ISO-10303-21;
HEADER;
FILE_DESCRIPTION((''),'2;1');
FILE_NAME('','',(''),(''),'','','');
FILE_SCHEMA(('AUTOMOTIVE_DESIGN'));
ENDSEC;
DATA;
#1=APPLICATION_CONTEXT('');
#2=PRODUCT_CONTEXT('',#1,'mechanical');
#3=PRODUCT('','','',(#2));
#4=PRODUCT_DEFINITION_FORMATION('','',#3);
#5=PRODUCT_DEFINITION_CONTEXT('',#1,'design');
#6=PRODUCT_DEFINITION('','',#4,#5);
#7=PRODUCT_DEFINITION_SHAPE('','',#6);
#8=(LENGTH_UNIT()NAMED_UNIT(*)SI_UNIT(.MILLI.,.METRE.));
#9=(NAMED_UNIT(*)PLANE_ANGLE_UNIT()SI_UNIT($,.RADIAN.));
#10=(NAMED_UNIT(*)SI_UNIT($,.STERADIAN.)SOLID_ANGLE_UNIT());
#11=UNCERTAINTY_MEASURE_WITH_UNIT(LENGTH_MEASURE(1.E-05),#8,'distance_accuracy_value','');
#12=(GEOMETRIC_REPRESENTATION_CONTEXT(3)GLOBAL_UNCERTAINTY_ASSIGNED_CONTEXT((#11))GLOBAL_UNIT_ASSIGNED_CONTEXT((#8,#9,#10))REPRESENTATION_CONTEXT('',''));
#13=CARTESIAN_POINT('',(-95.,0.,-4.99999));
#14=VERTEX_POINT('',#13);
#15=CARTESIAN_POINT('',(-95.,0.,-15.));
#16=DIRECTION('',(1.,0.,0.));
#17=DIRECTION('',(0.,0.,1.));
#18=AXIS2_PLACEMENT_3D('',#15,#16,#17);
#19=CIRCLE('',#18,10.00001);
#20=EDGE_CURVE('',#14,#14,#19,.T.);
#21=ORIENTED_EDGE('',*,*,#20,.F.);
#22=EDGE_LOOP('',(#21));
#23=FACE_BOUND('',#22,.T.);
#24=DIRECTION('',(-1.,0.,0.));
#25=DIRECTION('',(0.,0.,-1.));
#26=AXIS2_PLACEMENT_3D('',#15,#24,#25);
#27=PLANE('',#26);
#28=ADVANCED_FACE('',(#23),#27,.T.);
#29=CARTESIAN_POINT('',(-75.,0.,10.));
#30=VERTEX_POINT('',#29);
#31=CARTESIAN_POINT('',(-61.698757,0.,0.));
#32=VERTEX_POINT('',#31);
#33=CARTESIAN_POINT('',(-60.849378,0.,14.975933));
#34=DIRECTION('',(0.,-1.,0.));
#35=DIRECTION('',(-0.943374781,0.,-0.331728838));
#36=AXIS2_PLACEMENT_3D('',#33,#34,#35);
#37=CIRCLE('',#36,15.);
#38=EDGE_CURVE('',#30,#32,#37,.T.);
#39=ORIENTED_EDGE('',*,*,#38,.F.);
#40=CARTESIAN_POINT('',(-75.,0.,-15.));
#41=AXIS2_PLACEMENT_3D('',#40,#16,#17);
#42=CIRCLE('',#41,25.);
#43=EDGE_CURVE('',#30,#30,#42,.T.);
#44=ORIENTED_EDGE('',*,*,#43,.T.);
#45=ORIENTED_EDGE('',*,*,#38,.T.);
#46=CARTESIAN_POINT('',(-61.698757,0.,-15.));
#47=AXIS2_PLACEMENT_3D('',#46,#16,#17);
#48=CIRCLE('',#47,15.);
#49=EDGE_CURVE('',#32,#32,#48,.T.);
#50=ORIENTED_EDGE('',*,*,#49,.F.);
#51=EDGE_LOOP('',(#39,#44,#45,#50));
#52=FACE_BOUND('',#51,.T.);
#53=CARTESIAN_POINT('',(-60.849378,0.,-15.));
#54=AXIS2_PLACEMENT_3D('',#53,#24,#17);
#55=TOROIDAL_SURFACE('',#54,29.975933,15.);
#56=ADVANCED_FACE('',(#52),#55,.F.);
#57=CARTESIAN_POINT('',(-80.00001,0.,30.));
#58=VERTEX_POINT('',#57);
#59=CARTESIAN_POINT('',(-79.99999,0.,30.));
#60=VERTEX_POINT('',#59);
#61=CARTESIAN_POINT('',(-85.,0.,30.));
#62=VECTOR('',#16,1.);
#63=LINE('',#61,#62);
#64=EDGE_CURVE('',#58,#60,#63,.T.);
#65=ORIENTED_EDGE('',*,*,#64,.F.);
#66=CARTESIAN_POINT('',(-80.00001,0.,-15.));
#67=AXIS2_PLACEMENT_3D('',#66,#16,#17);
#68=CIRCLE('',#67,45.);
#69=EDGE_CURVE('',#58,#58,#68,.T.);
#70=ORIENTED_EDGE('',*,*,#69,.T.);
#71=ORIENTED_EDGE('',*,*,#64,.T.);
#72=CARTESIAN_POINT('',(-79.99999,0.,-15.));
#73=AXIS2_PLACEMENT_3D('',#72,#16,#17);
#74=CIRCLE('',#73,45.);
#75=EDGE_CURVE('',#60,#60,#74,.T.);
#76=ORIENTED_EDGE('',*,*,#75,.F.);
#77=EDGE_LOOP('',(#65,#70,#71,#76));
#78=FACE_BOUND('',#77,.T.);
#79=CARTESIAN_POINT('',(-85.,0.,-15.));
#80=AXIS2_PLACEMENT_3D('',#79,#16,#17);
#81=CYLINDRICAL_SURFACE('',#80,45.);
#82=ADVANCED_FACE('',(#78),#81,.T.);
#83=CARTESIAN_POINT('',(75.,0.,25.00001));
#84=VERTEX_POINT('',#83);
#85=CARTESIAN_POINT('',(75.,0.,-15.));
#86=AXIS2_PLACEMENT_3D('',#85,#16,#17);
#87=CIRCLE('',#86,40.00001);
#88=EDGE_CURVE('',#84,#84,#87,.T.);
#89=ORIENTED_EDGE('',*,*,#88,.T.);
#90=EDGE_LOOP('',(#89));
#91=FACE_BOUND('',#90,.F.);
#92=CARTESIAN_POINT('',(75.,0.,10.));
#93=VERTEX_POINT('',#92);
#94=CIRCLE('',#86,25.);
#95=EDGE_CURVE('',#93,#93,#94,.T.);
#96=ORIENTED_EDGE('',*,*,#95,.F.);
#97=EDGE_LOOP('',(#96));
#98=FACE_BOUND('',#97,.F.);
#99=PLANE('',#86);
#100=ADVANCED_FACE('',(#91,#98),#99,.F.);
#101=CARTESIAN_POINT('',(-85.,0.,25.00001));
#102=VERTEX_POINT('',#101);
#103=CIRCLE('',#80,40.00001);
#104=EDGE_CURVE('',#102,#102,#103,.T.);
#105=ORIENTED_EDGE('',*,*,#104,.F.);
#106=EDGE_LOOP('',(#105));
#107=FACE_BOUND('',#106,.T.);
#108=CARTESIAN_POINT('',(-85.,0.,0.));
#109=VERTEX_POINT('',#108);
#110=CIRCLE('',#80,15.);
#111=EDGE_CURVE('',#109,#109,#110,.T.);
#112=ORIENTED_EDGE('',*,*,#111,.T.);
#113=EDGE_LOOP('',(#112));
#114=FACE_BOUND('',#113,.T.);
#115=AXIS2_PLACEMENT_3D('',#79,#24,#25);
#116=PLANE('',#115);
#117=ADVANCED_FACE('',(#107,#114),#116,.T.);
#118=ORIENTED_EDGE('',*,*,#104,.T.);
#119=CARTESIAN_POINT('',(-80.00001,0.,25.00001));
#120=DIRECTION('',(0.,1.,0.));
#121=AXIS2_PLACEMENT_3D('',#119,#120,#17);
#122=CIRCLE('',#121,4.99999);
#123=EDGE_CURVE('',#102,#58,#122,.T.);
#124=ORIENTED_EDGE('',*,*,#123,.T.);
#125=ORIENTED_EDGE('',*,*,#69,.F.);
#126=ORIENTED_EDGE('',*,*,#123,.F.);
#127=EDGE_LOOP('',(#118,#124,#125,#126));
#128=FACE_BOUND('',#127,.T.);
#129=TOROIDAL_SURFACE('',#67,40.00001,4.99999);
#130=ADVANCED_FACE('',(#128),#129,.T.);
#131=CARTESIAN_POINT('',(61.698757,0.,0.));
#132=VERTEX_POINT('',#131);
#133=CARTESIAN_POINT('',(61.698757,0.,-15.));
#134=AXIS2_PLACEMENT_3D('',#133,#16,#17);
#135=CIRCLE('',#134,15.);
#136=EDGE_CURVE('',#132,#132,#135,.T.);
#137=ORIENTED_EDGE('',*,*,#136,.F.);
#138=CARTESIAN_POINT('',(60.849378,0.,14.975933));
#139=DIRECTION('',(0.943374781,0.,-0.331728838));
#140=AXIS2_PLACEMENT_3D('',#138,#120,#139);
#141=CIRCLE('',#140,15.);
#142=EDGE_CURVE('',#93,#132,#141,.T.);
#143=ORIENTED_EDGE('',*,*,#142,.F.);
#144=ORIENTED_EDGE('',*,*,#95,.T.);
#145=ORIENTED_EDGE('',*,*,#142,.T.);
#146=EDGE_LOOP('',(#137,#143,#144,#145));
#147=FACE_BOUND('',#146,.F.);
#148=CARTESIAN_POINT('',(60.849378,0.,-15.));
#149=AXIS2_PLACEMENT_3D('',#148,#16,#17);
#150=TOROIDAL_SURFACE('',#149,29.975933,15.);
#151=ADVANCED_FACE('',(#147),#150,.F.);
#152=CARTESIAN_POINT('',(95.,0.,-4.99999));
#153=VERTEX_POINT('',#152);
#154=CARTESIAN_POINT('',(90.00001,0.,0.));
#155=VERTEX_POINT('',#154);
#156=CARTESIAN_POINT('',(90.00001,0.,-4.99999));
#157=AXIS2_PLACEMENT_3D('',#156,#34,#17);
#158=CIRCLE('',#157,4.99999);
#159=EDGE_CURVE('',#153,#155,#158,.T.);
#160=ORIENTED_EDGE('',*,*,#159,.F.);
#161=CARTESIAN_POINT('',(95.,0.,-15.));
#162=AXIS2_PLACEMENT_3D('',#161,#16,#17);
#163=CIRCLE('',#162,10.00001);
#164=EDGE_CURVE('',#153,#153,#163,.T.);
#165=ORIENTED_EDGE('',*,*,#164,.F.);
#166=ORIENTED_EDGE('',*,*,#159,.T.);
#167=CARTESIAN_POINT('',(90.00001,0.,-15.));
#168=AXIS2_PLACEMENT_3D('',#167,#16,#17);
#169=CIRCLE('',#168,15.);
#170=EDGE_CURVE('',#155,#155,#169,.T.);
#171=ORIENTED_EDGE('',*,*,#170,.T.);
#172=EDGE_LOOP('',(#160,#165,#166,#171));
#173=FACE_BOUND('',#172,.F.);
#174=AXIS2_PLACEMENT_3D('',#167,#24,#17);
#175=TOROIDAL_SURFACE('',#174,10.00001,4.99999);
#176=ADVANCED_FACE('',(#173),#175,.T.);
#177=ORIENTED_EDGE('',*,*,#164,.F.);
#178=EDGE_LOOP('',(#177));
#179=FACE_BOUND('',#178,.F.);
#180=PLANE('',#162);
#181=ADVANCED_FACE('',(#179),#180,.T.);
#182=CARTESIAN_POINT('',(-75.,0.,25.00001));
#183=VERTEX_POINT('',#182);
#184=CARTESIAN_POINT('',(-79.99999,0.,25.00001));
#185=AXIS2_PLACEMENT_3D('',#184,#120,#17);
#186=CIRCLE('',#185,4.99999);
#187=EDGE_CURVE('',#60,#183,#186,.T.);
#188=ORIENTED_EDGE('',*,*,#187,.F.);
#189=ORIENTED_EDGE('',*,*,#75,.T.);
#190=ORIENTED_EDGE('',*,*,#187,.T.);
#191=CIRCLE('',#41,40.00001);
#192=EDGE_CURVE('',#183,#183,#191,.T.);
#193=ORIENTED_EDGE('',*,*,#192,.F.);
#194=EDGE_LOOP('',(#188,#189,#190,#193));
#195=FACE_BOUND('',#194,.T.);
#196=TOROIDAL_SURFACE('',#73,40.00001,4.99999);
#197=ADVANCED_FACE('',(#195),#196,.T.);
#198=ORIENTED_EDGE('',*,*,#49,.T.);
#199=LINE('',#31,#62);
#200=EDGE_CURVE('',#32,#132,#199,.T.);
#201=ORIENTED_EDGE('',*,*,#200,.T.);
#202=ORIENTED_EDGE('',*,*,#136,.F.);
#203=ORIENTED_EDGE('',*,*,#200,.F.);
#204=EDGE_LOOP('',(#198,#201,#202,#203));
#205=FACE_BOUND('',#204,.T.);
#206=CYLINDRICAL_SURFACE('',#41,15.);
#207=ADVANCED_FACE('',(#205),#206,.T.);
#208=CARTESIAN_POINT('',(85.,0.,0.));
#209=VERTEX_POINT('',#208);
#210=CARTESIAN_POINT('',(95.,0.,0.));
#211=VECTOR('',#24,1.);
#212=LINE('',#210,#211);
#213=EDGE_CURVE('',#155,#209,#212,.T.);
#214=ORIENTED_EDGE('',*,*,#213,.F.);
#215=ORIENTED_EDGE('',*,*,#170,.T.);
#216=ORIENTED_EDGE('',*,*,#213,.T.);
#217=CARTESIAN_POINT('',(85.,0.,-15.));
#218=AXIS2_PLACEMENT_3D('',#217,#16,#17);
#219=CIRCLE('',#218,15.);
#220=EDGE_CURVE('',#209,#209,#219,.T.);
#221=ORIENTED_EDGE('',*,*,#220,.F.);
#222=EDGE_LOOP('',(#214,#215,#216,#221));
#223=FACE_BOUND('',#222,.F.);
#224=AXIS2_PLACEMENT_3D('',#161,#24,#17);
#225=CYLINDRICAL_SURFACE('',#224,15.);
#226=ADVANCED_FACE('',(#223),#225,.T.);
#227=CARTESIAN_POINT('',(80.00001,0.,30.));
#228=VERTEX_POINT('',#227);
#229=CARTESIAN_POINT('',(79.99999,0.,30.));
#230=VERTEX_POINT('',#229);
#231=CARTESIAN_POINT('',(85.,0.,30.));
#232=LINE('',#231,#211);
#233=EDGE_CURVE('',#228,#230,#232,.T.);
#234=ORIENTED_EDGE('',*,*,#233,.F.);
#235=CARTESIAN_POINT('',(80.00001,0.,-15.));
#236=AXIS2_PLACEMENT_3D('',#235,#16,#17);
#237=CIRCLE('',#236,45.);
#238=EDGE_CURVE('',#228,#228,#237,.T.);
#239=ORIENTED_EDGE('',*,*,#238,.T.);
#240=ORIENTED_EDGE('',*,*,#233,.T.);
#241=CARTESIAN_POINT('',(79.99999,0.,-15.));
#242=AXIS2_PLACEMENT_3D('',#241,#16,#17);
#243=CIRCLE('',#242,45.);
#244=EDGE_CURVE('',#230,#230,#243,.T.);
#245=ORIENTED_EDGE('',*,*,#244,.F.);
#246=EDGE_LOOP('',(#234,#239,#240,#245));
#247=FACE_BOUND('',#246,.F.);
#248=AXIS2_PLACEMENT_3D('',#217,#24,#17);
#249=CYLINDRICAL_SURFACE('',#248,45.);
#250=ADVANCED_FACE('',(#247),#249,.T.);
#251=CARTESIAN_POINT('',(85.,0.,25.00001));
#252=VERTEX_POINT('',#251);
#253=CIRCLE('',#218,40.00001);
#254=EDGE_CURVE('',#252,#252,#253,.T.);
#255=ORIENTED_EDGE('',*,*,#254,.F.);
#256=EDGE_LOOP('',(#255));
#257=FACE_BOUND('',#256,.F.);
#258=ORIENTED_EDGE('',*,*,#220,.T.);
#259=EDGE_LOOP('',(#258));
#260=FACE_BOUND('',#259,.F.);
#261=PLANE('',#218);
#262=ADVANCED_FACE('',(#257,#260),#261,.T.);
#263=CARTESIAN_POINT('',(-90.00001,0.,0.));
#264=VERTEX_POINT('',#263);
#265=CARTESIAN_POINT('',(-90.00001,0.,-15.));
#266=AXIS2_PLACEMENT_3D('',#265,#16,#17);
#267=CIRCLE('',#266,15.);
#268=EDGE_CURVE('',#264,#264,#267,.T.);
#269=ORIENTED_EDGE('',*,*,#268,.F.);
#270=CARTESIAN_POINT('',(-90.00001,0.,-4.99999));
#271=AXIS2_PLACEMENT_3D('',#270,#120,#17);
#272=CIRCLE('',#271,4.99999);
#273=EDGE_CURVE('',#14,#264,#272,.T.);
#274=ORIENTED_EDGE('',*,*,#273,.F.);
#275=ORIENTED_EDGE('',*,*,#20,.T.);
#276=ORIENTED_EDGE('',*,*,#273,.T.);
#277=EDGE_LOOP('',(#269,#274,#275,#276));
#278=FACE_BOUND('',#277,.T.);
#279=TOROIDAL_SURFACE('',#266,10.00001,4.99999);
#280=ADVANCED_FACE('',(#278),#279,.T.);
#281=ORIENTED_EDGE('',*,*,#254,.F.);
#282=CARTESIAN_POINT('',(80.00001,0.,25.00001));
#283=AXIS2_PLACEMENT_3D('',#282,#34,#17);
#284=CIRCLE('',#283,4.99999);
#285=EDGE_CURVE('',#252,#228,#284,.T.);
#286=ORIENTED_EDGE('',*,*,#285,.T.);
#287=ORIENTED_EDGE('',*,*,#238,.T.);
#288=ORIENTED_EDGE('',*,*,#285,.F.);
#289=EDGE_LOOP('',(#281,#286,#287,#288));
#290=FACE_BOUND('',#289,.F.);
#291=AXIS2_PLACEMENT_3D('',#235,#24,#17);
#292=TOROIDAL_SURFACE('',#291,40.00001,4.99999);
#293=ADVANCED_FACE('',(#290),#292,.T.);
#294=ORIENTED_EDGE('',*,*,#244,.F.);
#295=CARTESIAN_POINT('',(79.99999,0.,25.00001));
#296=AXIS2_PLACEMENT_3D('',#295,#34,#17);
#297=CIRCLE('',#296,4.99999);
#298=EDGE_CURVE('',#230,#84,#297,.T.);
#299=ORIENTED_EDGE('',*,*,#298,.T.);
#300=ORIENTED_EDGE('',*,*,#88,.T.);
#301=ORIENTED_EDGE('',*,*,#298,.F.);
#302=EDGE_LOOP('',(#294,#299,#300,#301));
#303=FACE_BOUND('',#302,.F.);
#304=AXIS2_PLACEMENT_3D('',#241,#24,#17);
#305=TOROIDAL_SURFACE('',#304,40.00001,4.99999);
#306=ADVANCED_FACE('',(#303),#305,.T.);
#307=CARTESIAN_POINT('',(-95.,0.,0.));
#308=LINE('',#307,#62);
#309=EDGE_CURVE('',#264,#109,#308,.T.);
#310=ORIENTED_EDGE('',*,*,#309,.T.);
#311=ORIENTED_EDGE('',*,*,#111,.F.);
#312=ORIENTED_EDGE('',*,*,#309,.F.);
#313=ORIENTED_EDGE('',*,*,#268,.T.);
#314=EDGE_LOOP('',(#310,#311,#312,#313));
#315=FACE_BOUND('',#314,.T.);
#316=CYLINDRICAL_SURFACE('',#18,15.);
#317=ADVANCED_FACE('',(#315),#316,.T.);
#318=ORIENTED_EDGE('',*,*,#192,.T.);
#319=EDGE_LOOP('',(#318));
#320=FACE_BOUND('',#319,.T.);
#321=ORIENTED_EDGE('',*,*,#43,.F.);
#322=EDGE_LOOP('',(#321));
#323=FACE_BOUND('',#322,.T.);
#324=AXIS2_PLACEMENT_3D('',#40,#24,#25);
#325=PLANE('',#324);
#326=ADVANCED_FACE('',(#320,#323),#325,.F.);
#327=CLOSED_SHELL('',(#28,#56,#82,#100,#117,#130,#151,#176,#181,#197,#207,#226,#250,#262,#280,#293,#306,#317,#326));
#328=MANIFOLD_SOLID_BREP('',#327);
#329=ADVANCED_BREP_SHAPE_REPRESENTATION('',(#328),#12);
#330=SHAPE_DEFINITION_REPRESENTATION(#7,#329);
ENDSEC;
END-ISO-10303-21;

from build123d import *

# Parameters (mm, degrees)
F2_R = 4.99999


# Not quite as in the source:
# - a fillet or chamfer is up to 0.001 mm smaller than in the source, because OpenCascade refuses the exact size


with BuildPart() as f1:
    # F0 (on Front) → F1 (revolve)
    with BuildSketch(Plane.XZ):
        with BuildLine():
            Line((60, 0), (0, 0))
            Line((0, 0), (0, -15))
            Line((0, -15), (95, -15))
            Line((95, -15), (95, 0))
            Line((95, 0), (85, 0))
            Line((85, 0), (85, 30))
            Line((85, 30), (75, 30))
            Line((75, 30), (75, 10))
            Line((75, 10), (75, 0))
            Line((75, 0), (61.6987565648, 0))
            ThreePointArc((61.6987565648, 0), (60.8493782824, -0.0240674236), (60, 0))
        make_face()
        with BuildLine():
            Line((61.6987565648, 0), (60, 0))
            ThreePointArc((60, 0), (60.8493782824, -0.0240674236), (61.6987565648, 0))
        make_face()
        with BuildLine():
            ThreePointArc((75, 10), (69.863256471, 2.9863537681), (61.6987565648, 0))
            Line((61.6987565648, 0), (75, 0))
            Line((75, 0), (75, 10))
        make_face()
    revolve(axis=Axis((47.5, 0, -15), (1, 0, 0)))

    # F2 (radius 5 in the source; OpenCascade refuses exactly that, so slightly less here)
    f2_edges = [f1.edges().sort_by_distance(p)[0] for p in [
        (85, 0, -60),
        (75, 0, -60),
        (95, 0, -30),
    ]]
    fillet(f2_edges, radius=F2_R)

    # F3: F1 across face


with BuildPart() as f1_1:
    add(f1.part)
    add(f1.part.mirror(Plane(origin=(0, 0, -15), x_dir=(0, -1, 0), z_dir=(-1, 0, 0))))


solid = f1_1.part
